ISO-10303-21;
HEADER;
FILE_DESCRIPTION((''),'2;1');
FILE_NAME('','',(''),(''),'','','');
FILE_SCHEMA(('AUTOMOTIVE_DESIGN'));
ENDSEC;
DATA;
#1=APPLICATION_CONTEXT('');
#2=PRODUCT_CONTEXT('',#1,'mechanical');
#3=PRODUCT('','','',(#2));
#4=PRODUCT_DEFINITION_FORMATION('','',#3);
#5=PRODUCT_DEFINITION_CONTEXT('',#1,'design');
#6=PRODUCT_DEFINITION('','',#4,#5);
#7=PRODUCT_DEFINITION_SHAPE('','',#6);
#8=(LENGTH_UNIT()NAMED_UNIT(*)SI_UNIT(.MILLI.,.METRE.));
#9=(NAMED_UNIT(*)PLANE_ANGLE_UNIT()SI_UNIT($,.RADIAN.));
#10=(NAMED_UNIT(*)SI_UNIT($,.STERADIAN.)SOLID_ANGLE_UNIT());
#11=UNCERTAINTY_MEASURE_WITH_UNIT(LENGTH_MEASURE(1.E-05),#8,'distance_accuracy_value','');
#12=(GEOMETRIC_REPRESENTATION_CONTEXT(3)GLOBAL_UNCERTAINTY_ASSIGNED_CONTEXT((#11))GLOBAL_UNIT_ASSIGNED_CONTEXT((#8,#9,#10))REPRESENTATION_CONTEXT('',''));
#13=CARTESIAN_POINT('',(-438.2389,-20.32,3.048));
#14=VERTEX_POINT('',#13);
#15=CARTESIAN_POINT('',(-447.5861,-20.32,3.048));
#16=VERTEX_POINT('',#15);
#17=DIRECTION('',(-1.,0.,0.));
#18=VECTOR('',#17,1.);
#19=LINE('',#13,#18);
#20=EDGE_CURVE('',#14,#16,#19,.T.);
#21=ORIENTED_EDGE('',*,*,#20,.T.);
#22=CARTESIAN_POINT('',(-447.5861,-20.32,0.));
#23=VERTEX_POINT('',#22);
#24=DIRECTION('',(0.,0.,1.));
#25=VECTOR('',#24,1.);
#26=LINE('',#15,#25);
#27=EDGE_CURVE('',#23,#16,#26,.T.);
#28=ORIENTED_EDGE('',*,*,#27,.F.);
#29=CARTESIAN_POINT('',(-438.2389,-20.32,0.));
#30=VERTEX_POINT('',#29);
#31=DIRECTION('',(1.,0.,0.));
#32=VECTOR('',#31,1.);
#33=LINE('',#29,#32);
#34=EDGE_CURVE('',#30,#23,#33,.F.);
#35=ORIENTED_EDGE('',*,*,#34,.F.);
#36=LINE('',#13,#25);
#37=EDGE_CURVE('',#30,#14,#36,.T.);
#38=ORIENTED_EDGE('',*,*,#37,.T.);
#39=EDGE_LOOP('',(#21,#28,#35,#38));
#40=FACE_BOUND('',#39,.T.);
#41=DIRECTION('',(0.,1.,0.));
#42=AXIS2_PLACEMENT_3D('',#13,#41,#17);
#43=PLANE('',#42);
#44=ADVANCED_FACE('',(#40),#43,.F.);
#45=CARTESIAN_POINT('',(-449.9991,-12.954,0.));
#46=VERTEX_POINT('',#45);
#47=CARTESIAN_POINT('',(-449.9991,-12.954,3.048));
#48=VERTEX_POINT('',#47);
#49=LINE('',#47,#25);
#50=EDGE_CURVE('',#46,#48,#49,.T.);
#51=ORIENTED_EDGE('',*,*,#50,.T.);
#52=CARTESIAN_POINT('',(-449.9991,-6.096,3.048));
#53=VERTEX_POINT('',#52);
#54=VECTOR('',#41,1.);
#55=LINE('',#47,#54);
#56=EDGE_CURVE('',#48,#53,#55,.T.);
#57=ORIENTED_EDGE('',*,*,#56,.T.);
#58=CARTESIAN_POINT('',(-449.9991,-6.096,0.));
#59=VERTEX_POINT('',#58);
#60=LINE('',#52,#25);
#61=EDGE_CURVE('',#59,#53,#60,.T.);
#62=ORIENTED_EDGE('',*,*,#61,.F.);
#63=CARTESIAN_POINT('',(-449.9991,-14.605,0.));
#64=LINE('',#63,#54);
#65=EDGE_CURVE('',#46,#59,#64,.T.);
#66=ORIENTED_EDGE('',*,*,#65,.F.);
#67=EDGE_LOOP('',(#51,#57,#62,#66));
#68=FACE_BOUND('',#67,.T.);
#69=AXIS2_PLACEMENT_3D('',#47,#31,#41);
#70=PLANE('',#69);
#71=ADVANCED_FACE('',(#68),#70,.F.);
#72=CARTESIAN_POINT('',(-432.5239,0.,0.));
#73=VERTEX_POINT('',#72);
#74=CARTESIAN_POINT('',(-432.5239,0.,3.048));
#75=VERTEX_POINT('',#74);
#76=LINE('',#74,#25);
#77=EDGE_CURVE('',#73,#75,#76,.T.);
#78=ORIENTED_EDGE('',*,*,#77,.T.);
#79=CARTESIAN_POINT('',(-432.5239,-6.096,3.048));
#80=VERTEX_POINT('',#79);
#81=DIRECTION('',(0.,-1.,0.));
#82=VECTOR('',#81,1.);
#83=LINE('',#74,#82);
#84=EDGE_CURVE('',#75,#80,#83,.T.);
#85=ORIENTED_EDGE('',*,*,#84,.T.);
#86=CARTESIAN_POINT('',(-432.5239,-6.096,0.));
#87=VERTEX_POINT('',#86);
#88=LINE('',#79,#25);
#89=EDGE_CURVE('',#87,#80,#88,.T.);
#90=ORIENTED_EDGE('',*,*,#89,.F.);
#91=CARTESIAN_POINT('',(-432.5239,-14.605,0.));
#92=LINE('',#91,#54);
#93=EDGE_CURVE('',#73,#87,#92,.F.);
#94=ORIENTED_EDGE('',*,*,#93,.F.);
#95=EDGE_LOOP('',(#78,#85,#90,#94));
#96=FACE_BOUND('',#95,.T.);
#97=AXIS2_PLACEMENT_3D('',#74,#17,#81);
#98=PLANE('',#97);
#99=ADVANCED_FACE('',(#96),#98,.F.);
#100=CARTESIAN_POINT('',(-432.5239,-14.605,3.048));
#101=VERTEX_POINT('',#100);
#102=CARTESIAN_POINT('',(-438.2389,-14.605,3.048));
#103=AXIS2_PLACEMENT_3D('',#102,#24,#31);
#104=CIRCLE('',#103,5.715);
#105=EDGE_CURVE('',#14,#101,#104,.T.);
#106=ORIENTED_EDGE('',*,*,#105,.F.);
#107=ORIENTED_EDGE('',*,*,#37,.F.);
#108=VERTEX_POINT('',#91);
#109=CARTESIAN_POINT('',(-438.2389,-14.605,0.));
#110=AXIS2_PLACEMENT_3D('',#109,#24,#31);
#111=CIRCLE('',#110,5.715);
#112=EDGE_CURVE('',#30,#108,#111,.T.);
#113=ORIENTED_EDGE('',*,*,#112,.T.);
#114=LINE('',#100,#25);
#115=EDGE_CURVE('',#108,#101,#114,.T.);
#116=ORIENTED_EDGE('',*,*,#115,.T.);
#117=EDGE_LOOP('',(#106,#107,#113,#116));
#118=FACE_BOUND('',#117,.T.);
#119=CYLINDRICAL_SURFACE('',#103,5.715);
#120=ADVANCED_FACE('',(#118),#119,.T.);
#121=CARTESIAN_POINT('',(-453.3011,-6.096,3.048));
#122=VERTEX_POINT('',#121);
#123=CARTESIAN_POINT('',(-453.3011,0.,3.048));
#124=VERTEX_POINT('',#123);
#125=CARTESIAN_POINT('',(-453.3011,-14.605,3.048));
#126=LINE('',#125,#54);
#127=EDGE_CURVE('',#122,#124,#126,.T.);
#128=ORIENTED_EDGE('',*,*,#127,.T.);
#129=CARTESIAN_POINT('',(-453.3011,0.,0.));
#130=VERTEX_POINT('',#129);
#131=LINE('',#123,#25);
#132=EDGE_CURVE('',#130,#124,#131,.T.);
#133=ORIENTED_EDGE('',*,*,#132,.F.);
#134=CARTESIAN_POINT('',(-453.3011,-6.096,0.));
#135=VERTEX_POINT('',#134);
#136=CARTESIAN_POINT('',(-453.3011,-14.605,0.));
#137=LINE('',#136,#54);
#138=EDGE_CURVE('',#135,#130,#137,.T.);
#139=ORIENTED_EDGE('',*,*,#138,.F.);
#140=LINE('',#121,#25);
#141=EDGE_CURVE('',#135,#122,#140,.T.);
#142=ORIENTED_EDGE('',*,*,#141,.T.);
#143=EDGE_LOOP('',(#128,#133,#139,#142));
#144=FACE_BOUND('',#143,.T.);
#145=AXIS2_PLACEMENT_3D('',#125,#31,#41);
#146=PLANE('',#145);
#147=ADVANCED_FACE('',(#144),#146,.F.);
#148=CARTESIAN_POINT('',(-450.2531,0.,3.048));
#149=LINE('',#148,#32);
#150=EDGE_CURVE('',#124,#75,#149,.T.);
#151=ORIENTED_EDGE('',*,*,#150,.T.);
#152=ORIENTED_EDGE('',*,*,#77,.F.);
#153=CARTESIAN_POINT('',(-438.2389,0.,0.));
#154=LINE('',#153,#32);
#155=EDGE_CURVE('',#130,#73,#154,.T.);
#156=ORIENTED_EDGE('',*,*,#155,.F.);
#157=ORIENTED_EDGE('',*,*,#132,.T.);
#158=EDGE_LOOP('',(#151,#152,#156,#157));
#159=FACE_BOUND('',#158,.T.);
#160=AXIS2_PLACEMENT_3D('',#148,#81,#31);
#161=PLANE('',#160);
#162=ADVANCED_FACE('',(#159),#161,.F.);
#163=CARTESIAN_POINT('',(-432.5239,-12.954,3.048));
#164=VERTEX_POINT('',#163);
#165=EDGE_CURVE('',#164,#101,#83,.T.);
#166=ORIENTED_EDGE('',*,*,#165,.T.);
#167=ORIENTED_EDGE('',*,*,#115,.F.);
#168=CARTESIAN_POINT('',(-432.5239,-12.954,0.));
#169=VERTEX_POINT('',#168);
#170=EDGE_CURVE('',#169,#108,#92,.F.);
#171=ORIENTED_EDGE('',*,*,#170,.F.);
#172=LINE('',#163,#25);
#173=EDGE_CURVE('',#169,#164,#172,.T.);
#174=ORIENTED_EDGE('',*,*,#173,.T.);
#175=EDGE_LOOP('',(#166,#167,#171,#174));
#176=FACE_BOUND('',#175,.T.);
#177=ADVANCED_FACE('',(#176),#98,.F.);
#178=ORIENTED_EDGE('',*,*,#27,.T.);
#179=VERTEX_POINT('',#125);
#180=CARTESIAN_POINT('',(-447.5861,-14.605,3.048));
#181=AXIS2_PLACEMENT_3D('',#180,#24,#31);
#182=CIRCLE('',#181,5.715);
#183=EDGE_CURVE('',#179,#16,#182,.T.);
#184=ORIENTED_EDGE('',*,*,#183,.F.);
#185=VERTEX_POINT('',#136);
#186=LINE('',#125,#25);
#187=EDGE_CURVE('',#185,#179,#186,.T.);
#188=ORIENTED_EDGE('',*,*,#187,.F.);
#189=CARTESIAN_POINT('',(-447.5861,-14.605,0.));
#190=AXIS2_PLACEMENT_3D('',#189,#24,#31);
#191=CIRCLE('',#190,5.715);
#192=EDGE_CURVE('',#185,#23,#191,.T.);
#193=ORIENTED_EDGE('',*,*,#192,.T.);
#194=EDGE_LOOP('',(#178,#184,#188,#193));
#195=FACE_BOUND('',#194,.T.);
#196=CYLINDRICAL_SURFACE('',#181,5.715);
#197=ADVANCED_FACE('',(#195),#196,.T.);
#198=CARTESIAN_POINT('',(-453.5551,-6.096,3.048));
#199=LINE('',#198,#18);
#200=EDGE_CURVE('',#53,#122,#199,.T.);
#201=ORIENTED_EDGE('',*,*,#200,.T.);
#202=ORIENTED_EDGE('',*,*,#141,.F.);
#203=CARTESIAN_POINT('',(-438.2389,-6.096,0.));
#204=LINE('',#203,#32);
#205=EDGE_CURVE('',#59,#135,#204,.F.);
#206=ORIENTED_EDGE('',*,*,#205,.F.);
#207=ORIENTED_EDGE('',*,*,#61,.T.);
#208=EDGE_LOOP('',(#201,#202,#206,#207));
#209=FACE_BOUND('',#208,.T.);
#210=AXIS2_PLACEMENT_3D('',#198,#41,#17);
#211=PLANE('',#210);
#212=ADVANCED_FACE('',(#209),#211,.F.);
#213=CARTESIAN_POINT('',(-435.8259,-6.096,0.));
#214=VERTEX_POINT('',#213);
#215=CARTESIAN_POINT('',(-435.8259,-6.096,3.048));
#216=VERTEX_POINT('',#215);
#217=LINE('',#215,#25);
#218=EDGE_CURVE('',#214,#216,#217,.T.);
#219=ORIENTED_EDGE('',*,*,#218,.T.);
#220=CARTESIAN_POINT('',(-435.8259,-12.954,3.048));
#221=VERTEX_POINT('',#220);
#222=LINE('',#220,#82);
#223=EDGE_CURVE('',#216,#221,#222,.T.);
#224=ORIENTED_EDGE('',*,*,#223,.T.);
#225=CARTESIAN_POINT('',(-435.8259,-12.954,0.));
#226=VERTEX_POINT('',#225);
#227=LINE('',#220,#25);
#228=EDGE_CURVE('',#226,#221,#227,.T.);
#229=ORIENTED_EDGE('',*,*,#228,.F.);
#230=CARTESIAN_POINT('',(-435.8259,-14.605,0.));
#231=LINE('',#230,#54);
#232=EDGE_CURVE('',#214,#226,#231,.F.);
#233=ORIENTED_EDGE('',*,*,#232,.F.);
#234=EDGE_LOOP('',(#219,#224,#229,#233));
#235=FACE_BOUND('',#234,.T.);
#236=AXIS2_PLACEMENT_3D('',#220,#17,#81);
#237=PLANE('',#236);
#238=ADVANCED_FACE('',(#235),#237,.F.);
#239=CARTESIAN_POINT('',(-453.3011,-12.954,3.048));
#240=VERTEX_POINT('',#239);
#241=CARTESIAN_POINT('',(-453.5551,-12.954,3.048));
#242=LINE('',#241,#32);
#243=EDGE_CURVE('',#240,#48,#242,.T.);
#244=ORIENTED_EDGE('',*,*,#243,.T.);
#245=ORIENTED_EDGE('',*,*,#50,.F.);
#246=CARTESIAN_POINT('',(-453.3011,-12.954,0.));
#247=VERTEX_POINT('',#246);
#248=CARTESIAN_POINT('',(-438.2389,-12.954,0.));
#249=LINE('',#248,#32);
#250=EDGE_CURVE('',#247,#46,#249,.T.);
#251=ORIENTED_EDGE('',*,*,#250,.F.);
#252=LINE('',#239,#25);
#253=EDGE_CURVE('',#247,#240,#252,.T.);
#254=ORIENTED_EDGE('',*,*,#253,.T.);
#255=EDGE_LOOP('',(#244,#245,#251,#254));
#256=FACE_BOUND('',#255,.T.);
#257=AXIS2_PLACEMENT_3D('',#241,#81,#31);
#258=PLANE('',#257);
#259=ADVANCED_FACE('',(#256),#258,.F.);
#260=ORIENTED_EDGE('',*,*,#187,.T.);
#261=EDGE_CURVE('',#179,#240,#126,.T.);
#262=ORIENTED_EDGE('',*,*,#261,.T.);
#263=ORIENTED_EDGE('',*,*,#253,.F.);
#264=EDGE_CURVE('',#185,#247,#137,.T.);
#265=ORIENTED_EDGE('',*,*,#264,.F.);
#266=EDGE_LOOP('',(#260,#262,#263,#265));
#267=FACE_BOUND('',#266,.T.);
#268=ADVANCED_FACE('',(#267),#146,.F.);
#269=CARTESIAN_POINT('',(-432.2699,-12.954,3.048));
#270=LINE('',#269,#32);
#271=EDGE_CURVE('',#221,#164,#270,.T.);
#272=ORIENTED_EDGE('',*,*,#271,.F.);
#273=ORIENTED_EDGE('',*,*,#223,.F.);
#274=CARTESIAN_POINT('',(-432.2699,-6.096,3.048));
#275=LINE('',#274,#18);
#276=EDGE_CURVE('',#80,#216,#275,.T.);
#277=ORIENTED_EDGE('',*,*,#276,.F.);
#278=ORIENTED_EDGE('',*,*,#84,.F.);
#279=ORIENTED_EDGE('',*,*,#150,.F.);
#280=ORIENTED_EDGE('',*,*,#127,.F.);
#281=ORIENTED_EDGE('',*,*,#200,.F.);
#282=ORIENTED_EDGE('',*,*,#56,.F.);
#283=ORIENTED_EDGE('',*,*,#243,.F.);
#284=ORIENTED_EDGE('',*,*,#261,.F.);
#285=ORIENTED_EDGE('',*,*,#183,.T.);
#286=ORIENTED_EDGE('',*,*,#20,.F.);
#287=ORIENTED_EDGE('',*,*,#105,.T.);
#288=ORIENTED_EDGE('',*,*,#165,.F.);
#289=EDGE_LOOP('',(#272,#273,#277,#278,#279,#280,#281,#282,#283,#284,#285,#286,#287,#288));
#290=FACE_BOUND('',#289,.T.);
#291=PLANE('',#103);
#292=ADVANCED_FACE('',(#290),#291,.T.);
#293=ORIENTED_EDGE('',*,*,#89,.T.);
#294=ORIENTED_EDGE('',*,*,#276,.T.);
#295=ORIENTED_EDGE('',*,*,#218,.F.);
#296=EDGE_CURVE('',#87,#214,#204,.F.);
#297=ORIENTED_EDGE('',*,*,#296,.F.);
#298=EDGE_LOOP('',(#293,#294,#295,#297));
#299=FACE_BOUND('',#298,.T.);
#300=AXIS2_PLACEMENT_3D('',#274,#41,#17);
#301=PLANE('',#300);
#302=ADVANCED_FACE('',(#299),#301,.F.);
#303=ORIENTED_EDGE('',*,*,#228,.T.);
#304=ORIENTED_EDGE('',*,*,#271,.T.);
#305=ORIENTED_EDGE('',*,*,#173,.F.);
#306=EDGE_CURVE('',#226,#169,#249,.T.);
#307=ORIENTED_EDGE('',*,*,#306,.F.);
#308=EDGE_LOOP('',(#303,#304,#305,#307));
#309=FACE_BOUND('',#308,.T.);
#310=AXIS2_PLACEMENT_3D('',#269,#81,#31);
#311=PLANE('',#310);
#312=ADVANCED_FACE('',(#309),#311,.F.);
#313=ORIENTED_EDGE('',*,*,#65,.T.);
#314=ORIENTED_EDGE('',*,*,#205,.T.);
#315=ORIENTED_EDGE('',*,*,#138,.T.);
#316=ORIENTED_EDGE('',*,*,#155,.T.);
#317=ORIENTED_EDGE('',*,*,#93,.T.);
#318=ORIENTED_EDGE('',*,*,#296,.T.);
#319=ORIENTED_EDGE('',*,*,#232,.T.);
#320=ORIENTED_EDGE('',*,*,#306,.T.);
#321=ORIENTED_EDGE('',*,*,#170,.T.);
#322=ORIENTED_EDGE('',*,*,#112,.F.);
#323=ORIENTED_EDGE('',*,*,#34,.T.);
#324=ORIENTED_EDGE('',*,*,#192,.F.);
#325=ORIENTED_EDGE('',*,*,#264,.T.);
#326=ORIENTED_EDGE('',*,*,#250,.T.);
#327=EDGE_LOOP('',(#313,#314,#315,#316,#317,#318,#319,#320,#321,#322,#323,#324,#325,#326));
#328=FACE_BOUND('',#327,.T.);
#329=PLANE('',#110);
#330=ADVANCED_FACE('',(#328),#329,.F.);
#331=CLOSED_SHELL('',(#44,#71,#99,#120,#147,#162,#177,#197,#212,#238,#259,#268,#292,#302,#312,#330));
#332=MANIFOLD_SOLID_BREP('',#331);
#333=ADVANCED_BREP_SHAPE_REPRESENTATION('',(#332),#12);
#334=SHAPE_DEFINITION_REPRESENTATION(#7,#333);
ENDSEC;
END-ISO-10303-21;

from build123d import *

# Parameters (mm, degrees)
BOSS_EXTRUDE1_DEPTH = 3.048
SKETCH2_W           = 3.556
SKETCH2_H           = 6.858
CUT_EXTRUDE1_DEPTH  = 454.766547869


with BuildPart() as part:
    # Sketch1 → Boss-Extrude1 (new body)
    with BuildSketch(Plane.XY):
        with BuildLine():
            Line((-435.5719, 0), (-432.5239, 0))
            Line((-432.5239, 0), (-432.5239, -6.35))
            Line((-432.5239, -6.35), (-432.5239, -12.7))
            Line((-432.5239, -12.7), (-432.5239, -14.605))
            ThreePointArc((-432.5239, -14.605), (-434.197784746, -18.646115254), (-438.2389, -20.32))
            Line((-438.2389, -20.32), (-447.5861, -20.32))
            ThreePointArc((-447.5861, -20.32), (-451.627215254, -18.646115254), (-453.3011, -14.605))
            Line((-453.3011, -14.605), (-453.3011, -12.7))
            Line((-453.3011, -12.7), (-453.3011, -6.35))
            Line((-453.3011, -6.35), (-453.3011, 0))
            Line((-453.3011, 0), (-450.2531, 0))
            Line((-450.2531, 0), (-435.5719, 0))
        make_face()
    extrude(amount=BOSS_EXTRUDE1_DEPTH)

    # Sketch2 → Cut-Extrude1 (cut, through all)
    with BuildSketch(Plane.XY.offset(3.048)):
        with Locations((-434.0479, -9.525)):
            Rectangle(SKETCH2_W, SKETCH2_H)
        with Locations((-451.7771, -9.525)):
            Rectangle(SKETCH2_W, SKETCH2_H)
    extrude(amount=-CUT_EXTRUDE1_DEPTH, mode=Mode.SUBTRACT)


solid = part.part
